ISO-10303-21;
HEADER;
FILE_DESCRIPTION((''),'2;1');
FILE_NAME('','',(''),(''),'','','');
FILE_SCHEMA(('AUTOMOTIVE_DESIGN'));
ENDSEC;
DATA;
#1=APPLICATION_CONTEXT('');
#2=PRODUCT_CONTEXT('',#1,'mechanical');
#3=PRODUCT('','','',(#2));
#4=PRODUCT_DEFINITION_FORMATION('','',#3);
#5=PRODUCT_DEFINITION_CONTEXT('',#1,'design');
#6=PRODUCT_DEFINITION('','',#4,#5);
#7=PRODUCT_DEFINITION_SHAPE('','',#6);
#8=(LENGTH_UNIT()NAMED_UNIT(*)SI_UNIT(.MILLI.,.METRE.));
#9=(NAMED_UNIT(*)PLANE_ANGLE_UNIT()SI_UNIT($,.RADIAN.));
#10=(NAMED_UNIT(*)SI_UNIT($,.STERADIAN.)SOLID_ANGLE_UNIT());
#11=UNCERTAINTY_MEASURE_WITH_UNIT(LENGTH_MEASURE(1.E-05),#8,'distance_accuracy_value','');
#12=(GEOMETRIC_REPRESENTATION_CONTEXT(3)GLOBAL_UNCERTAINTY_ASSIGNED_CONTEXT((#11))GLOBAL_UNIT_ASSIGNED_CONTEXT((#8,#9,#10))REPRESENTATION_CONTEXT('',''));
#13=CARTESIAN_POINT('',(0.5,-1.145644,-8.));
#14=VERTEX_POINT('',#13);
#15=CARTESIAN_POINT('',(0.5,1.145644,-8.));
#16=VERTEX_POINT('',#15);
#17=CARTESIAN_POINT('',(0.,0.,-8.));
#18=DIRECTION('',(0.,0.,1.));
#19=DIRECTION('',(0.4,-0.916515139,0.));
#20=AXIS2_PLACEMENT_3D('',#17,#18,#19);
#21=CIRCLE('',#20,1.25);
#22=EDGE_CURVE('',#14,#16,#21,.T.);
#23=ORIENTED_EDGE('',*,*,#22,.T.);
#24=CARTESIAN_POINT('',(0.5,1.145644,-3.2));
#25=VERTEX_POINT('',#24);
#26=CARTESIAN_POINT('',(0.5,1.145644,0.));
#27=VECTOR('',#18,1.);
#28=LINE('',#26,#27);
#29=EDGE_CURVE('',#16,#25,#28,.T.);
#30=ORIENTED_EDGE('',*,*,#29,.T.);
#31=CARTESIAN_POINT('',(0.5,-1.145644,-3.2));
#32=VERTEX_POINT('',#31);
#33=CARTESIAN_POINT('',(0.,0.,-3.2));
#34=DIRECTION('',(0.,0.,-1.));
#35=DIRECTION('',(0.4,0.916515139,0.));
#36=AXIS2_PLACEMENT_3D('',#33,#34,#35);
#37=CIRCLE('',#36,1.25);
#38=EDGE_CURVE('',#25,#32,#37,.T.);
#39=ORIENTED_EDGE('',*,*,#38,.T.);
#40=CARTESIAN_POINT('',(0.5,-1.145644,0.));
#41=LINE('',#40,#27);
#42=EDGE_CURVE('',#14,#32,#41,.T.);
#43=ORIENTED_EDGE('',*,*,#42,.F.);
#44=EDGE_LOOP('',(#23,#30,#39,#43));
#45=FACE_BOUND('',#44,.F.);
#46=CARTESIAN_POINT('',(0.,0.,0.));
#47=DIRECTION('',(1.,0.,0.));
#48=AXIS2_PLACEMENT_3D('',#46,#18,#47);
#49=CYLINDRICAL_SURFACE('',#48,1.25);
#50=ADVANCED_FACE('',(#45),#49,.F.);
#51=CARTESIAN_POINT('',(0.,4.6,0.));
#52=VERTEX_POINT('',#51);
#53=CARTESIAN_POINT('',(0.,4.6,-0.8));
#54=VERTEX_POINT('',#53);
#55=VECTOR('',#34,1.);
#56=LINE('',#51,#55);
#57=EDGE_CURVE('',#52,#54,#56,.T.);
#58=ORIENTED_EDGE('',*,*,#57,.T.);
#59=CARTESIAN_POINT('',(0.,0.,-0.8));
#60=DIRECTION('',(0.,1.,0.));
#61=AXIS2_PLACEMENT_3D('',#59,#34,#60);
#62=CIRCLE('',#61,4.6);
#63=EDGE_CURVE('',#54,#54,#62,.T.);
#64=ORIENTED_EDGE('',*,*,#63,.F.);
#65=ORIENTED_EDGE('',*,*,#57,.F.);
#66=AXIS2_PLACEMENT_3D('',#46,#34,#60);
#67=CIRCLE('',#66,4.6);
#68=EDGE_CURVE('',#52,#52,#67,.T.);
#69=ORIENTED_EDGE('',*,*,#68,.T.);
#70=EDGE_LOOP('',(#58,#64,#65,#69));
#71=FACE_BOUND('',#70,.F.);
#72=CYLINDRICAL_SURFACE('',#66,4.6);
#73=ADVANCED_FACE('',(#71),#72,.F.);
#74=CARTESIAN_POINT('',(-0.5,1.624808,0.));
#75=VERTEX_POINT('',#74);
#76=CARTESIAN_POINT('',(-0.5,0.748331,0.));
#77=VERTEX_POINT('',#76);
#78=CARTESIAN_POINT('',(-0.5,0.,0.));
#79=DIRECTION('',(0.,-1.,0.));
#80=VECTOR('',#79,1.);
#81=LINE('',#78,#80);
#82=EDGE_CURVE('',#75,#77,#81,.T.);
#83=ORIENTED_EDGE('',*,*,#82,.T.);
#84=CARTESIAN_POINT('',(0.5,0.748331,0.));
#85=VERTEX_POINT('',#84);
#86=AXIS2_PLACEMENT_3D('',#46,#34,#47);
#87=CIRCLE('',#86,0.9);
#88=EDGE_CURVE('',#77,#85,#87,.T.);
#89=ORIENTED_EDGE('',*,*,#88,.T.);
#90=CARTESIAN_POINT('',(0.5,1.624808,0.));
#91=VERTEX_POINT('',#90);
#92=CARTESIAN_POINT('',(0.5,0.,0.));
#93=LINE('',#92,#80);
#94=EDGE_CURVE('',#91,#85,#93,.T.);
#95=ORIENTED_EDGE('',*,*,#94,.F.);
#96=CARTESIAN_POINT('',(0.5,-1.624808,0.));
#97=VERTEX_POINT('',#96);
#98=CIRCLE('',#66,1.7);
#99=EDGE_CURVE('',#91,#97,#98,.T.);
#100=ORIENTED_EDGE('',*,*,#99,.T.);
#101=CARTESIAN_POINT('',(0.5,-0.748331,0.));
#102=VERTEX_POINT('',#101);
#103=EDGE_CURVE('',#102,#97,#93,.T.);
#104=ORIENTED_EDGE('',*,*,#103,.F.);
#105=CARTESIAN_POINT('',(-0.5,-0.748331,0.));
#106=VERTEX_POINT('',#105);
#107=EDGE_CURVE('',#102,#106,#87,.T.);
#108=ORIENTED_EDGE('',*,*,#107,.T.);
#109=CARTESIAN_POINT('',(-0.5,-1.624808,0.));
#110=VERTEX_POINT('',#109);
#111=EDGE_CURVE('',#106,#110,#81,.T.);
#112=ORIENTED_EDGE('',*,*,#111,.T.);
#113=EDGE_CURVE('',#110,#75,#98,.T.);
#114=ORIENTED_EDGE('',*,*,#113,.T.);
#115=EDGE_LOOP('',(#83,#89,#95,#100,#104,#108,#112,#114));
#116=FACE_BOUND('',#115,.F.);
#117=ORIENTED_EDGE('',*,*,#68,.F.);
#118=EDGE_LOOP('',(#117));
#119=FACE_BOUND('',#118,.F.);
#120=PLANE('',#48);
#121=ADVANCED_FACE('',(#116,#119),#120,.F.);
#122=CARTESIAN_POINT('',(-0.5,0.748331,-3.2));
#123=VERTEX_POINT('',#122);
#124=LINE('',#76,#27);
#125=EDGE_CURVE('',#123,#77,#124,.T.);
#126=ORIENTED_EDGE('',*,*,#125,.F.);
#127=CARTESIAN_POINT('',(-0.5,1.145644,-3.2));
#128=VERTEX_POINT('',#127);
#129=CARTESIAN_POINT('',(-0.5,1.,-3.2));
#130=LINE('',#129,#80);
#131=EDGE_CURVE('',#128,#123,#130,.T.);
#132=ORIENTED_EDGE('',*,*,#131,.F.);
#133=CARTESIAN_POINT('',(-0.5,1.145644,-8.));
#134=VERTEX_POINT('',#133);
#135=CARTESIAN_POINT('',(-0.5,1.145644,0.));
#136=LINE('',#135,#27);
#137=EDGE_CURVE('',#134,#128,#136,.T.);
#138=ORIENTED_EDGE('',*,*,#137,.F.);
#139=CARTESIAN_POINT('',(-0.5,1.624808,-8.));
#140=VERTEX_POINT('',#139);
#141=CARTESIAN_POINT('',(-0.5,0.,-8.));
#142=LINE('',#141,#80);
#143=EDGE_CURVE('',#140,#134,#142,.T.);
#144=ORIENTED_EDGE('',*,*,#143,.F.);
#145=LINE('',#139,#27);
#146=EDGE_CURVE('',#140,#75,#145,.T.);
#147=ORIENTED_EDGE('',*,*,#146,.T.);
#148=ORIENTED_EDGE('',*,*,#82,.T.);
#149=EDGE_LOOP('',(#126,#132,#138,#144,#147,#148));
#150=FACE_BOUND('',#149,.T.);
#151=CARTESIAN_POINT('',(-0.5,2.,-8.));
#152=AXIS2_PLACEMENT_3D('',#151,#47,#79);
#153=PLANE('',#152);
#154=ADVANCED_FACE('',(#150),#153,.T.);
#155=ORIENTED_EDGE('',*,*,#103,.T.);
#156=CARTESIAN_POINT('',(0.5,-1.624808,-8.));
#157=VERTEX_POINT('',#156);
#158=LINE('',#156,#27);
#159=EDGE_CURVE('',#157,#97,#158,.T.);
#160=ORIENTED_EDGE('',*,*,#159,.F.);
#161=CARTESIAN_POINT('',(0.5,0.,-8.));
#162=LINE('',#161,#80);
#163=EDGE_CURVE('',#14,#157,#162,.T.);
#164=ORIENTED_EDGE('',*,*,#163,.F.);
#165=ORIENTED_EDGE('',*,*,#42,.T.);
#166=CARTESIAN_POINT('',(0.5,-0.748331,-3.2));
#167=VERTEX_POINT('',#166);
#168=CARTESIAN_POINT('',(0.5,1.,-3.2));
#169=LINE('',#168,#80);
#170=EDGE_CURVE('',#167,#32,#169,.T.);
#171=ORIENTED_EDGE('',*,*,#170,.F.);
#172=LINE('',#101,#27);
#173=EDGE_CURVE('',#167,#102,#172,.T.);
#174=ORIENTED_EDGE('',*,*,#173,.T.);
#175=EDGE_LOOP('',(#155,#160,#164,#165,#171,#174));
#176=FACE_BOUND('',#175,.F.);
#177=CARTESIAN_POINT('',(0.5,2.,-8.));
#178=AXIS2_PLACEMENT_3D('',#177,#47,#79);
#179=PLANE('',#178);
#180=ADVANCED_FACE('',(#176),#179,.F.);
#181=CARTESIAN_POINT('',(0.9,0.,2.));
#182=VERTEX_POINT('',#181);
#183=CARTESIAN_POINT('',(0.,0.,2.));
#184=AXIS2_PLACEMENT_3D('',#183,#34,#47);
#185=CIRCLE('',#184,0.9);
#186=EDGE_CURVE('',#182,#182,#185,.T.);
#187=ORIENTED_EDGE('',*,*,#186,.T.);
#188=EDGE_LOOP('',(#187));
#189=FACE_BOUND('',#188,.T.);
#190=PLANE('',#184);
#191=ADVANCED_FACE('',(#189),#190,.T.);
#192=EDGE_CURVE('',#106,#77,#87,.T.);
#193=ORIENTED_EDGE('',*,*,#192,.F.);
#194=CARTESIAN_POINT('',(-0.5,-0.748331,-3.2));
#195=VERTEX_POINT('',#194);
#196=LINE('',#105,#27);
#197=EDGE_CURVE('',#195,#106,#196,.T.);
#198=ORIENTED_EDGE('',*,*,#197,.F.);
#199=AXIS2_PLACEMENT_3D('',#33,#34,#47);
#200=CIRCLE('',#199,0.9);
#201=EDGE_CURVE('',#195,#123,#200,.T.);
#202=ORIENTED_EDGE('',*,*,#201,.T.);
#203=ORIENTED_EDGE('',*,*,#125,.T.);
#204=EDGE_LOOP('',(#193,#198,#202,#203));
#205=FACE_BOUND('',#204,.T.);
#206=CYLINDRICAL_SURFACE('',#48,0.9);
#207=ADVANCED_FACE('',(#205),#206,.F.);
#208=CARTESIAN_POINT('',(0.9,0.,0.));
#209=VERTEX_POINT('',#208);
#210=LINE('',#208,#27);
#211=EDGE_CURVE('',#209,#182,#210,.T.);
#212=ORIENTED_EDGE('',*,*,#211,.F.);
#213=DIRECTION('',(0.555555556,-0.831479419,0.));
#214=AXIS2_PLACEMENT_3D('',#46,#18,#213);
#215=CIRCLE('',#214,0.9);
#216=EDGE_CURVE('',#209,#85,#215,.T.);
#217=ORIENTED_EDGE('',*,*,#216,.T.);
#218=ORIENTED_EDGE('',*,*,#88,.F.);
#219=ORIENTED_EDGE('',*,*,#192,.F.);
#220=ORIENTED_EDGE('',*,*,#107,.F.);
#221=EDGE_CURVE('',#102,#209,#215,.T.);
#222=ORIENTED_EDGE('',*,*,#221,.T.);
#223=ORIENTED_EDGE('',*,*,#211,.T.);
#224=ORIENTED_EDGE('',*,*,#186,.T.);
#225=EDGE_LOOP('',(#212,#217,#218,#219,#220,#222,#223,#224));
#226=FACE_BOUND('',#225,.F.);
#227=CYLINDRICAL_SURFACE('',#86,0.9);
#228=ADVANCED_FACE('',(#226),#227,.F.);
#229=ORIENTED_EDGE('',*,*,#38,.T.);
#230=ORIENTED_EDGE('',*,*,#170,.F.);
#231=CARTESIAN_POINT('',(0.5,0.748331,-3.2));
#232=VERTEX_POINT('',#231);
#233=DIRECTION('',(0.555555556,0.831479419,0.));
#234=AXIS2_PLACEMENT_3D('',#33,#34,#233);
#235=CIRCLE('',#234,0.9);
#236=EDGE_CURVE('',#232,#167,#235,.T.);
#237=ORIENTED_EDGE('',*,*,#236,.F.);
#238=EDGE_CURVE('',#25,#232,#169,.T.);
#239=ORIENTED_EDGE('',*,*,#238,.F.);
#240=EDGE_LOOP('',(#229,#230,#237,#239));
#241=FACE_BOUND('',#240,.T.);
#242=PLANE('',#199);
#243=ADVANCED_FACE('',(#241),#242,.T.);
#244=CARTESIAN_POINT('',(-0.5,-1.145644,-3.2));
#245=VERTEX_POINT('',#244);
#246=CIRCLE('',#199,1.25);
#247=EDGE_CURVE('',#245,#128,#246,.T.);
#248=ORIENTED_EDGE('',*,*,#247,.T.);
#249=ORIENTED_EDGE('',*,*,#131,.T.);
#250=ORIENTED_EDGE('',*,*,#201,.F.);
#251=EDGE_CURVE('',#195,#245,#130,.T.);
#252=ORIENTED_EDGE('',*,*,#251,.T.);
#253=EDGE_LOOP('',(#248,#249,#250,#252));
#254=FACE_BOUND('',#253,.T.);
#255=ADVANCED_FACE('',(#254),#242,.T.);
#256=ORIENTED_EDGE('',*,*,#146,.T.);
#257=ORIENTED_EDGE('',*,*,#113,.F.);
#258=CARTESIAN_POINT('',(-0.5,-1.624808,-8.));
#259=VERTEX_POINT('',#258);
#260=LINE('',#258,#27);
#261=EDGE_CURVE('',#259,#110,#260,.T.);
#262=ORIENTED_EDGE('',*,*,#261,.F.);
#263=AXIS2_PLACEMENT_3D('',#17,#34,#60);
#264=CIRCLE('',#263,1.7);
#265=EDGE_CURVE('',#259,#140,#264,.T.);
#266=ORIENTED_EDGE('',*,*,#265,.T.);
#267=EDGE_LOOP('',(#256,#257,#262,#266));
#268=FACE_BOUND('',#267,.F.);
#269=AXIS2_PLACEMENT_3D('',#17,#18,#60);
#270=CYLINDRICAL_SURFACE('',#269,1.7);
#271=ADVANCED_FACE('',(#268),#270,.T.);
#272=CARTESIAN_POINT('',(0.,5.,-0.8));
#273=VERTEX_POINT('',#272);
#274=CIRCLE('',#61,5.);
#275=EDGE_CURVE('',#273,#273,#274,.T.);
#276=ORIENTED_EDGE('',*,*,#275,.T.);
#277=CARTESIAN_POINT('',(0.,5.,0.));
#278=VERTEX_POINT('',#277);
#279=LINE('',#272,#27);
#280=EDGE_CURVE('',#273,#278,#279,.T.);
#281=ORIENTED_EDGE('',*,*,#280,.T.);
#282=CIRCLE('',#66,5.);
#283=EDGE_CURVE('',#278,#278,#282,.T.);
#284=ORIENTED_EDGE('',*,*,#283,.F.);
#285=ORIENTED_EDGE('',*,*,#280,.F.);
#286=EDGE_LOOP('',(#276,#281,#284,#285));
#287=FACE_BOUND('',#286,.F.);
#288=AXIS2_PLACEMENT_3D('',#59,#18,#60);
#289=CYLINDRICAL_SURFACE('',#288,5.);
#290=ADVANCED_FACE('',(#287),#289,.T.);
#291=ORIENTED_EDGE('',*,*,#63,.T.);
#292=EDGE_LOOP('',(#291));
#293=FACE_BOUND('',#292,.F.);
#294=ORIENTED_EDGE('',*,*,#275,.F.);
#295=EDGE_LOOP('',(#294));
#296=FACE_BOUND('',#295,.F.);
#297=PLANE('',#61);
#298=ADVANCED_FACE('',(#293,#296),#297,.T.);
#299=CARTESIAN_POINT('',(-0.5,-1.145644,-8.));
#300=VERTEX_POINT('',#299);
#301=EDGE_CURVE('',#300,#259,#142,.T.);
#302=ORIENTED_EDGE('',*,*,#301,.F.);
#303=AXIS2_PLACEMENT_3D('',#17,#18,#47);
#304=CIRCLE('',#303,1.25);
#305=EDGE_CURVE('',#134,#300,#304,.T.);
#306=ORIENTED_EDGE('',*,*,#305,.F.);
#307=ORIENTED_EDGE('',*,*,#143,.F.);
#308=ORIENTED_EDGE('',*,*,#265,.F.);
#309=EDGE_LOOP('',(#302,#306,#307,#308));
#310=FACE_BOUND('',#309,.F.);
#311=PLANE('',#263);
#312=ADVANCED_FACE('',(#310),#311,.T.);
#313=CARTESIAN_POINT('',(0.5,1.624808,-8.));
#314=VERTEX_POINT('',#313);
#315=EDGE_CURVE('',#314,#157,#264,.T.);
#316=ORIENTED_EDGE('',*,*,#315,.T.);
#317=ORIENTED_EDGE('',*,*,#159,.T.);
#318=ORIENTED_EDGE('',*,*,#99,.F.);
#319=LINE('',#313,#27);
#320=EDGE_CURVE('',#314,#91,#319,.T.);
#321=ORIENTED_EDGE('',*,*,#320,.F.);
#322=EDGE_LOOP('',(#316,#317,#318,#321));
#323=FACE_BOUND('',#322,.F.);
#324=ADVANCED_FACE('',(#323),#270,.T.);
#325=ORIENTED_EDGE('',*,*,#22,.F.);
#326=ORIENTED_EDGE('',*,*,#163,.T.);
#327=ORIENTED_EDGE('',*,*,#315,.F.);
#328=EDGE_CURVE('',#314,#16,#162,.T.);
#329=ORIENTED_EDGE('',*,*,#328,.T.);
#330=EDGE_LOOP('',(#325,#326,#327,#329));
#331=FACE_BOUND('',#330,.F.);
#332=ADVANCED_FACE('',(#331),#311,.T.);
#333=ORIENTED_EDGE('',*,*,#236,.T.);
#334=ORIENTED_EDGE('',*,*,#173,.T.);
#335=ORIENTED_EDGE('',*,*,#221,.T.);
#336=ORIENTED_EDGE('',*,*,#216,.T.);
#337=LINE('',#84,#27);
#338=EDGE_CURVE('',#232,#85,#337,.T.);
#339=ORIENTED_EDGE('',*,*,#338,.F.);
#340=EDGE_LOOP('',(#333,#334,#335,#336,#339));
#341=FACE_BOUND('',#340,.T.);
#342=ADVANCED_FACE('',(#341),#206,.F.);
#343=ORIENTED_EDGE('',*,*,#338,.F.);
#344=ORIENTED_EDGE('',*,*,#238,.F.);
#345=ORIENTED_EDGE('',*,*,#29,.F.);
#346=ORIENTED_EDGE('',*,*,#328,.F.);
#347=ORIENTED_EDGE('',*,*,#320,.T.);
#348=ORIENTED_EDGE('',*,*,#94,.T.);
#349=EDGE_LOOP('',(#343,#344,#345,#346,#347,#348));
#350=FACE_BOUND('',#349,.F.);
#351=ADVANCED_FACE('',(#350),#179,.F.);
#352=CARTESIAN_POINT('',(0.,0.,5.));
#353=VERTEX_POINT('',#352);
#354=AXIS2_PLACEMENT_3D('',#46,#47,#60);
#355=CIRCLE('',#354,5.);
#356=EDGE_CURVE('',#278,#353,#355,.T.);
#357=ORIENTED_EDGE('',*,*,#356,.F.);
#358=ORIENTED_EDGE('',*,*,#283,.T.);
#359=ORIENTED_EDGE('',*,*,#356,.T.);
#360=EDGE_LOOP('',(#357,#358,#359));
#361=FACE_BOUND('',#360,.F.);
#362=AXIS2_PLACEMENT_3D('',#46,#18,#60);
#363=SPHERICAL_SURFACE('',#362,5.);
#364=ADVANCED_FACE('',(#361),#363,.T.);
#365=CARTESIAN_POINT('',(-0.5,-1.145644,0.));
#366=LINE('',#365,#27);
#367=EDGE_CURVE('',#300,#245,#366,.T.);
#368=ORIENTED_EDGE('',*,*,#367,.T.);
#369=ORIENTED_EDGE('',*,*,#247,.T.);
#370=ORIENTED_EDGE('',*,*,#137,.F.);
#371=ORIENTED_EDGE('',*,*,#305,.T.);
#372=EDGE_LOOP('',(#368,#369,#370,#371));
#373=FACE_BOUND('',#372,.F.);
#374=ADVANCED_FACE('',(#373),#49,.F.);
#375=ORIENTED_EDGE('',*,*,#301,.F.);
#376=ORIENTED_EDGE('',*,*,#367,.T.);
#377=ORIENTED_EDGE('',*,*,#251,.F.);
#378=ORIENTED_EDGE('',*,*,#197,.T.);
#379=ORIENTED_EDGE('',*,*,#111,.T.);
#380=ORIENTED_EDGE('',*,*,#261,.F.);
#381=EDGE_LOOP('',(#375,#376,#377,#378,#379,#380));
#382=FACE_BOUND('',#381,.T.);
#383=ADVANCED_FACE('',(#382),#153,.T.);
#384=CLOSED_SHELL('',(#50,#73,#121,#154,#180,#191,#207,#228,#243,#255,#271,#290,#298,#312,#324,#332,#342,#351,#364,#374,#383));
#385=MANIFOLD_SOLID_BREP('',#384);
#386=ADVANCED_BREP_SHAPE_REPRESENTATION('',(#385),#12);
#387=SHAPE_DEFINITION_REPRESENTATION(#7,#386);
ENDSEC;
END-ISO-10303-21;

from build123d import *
from build123d import SkipClean  # not in build123d's __all__

# Parameters (mm, degrees)
F2_R      = 1.25
F3_DEPTH  = 8.001
F5_R      = 1.25
F5_R_2    = 0.9
F6_DEPTH  = 3.2
F7_W      = 1
F7_H      = 4
F8_DEPTH  = 8
F9_R      = 0.9
F10_DEPTH = 2


with BuildPart() as f1:
    # F0 (on Right) → F1 (revolve)
    with BuildSketch(Plane.YZ):
        with BuildLine():
            Line((5, -0.8), (5, 0))
            ThreePointArc((5, 0), (3.5355339059, 3.5355339059), (0, 5))
            Line((0, 5), (0, -8))
            Line((0, -8), (1.7, -8))
            Line((1.7, -8), (1.7, 0))
            Line((1.7, 0), (4.6, 0))
            Line((4.6, 0), (4.6, -0.8))
            Line((4.6, -0.8), (5, -0.8))
        make_face()
    revolve(axis=Axis((0, 0, -1.5), (0, 0, -1)))

    # F2 (on Top) → F3 (cut, through all)
    with BuildSketch(Plane.XY):
        Circle(F2_R)
    extrude(amount=-F3_DEPTH, mode=Mode.SUBTRACT)

    # F5 (on face) → F6 (join)
    with BuildSketch(Plane(origin=(0, 0, 0), x_dir=(1, 0, 0), z_dir=(0, 0, -1))):
        Circle(F5_R)
        Circle(F5_R_2, mode=Mode.SUBTRACT)
    extrude(amount=F6_DEPTH)

    # F7 (on face) → F8 (cut, through all)
    with BuildSketch(Plane(origin=(0, 0, -8), x_dir=(1, 0, 0), z_dir=(0, 0, -1))):
        Rectangle(F7_W, F7_H)
    extrude(amount=-F8_DEPTH, mode=Mode.SUBTRACT)

    # F9 (on face) → F10 (cut)
    with BuildSketch(Plane(origin=(0, 0, 0), x_dir=(1, 0, 0), z_dir=(0, 0, -1))):
        Circle(F9_R)
    with SkipClean():  # cleaning this boolean's faces spoils the solid; the shape is the same uncleaned
        extrude(amount=-F10_DEPTH, mode=Mode.SUBTRACT)


solid = f1.part
